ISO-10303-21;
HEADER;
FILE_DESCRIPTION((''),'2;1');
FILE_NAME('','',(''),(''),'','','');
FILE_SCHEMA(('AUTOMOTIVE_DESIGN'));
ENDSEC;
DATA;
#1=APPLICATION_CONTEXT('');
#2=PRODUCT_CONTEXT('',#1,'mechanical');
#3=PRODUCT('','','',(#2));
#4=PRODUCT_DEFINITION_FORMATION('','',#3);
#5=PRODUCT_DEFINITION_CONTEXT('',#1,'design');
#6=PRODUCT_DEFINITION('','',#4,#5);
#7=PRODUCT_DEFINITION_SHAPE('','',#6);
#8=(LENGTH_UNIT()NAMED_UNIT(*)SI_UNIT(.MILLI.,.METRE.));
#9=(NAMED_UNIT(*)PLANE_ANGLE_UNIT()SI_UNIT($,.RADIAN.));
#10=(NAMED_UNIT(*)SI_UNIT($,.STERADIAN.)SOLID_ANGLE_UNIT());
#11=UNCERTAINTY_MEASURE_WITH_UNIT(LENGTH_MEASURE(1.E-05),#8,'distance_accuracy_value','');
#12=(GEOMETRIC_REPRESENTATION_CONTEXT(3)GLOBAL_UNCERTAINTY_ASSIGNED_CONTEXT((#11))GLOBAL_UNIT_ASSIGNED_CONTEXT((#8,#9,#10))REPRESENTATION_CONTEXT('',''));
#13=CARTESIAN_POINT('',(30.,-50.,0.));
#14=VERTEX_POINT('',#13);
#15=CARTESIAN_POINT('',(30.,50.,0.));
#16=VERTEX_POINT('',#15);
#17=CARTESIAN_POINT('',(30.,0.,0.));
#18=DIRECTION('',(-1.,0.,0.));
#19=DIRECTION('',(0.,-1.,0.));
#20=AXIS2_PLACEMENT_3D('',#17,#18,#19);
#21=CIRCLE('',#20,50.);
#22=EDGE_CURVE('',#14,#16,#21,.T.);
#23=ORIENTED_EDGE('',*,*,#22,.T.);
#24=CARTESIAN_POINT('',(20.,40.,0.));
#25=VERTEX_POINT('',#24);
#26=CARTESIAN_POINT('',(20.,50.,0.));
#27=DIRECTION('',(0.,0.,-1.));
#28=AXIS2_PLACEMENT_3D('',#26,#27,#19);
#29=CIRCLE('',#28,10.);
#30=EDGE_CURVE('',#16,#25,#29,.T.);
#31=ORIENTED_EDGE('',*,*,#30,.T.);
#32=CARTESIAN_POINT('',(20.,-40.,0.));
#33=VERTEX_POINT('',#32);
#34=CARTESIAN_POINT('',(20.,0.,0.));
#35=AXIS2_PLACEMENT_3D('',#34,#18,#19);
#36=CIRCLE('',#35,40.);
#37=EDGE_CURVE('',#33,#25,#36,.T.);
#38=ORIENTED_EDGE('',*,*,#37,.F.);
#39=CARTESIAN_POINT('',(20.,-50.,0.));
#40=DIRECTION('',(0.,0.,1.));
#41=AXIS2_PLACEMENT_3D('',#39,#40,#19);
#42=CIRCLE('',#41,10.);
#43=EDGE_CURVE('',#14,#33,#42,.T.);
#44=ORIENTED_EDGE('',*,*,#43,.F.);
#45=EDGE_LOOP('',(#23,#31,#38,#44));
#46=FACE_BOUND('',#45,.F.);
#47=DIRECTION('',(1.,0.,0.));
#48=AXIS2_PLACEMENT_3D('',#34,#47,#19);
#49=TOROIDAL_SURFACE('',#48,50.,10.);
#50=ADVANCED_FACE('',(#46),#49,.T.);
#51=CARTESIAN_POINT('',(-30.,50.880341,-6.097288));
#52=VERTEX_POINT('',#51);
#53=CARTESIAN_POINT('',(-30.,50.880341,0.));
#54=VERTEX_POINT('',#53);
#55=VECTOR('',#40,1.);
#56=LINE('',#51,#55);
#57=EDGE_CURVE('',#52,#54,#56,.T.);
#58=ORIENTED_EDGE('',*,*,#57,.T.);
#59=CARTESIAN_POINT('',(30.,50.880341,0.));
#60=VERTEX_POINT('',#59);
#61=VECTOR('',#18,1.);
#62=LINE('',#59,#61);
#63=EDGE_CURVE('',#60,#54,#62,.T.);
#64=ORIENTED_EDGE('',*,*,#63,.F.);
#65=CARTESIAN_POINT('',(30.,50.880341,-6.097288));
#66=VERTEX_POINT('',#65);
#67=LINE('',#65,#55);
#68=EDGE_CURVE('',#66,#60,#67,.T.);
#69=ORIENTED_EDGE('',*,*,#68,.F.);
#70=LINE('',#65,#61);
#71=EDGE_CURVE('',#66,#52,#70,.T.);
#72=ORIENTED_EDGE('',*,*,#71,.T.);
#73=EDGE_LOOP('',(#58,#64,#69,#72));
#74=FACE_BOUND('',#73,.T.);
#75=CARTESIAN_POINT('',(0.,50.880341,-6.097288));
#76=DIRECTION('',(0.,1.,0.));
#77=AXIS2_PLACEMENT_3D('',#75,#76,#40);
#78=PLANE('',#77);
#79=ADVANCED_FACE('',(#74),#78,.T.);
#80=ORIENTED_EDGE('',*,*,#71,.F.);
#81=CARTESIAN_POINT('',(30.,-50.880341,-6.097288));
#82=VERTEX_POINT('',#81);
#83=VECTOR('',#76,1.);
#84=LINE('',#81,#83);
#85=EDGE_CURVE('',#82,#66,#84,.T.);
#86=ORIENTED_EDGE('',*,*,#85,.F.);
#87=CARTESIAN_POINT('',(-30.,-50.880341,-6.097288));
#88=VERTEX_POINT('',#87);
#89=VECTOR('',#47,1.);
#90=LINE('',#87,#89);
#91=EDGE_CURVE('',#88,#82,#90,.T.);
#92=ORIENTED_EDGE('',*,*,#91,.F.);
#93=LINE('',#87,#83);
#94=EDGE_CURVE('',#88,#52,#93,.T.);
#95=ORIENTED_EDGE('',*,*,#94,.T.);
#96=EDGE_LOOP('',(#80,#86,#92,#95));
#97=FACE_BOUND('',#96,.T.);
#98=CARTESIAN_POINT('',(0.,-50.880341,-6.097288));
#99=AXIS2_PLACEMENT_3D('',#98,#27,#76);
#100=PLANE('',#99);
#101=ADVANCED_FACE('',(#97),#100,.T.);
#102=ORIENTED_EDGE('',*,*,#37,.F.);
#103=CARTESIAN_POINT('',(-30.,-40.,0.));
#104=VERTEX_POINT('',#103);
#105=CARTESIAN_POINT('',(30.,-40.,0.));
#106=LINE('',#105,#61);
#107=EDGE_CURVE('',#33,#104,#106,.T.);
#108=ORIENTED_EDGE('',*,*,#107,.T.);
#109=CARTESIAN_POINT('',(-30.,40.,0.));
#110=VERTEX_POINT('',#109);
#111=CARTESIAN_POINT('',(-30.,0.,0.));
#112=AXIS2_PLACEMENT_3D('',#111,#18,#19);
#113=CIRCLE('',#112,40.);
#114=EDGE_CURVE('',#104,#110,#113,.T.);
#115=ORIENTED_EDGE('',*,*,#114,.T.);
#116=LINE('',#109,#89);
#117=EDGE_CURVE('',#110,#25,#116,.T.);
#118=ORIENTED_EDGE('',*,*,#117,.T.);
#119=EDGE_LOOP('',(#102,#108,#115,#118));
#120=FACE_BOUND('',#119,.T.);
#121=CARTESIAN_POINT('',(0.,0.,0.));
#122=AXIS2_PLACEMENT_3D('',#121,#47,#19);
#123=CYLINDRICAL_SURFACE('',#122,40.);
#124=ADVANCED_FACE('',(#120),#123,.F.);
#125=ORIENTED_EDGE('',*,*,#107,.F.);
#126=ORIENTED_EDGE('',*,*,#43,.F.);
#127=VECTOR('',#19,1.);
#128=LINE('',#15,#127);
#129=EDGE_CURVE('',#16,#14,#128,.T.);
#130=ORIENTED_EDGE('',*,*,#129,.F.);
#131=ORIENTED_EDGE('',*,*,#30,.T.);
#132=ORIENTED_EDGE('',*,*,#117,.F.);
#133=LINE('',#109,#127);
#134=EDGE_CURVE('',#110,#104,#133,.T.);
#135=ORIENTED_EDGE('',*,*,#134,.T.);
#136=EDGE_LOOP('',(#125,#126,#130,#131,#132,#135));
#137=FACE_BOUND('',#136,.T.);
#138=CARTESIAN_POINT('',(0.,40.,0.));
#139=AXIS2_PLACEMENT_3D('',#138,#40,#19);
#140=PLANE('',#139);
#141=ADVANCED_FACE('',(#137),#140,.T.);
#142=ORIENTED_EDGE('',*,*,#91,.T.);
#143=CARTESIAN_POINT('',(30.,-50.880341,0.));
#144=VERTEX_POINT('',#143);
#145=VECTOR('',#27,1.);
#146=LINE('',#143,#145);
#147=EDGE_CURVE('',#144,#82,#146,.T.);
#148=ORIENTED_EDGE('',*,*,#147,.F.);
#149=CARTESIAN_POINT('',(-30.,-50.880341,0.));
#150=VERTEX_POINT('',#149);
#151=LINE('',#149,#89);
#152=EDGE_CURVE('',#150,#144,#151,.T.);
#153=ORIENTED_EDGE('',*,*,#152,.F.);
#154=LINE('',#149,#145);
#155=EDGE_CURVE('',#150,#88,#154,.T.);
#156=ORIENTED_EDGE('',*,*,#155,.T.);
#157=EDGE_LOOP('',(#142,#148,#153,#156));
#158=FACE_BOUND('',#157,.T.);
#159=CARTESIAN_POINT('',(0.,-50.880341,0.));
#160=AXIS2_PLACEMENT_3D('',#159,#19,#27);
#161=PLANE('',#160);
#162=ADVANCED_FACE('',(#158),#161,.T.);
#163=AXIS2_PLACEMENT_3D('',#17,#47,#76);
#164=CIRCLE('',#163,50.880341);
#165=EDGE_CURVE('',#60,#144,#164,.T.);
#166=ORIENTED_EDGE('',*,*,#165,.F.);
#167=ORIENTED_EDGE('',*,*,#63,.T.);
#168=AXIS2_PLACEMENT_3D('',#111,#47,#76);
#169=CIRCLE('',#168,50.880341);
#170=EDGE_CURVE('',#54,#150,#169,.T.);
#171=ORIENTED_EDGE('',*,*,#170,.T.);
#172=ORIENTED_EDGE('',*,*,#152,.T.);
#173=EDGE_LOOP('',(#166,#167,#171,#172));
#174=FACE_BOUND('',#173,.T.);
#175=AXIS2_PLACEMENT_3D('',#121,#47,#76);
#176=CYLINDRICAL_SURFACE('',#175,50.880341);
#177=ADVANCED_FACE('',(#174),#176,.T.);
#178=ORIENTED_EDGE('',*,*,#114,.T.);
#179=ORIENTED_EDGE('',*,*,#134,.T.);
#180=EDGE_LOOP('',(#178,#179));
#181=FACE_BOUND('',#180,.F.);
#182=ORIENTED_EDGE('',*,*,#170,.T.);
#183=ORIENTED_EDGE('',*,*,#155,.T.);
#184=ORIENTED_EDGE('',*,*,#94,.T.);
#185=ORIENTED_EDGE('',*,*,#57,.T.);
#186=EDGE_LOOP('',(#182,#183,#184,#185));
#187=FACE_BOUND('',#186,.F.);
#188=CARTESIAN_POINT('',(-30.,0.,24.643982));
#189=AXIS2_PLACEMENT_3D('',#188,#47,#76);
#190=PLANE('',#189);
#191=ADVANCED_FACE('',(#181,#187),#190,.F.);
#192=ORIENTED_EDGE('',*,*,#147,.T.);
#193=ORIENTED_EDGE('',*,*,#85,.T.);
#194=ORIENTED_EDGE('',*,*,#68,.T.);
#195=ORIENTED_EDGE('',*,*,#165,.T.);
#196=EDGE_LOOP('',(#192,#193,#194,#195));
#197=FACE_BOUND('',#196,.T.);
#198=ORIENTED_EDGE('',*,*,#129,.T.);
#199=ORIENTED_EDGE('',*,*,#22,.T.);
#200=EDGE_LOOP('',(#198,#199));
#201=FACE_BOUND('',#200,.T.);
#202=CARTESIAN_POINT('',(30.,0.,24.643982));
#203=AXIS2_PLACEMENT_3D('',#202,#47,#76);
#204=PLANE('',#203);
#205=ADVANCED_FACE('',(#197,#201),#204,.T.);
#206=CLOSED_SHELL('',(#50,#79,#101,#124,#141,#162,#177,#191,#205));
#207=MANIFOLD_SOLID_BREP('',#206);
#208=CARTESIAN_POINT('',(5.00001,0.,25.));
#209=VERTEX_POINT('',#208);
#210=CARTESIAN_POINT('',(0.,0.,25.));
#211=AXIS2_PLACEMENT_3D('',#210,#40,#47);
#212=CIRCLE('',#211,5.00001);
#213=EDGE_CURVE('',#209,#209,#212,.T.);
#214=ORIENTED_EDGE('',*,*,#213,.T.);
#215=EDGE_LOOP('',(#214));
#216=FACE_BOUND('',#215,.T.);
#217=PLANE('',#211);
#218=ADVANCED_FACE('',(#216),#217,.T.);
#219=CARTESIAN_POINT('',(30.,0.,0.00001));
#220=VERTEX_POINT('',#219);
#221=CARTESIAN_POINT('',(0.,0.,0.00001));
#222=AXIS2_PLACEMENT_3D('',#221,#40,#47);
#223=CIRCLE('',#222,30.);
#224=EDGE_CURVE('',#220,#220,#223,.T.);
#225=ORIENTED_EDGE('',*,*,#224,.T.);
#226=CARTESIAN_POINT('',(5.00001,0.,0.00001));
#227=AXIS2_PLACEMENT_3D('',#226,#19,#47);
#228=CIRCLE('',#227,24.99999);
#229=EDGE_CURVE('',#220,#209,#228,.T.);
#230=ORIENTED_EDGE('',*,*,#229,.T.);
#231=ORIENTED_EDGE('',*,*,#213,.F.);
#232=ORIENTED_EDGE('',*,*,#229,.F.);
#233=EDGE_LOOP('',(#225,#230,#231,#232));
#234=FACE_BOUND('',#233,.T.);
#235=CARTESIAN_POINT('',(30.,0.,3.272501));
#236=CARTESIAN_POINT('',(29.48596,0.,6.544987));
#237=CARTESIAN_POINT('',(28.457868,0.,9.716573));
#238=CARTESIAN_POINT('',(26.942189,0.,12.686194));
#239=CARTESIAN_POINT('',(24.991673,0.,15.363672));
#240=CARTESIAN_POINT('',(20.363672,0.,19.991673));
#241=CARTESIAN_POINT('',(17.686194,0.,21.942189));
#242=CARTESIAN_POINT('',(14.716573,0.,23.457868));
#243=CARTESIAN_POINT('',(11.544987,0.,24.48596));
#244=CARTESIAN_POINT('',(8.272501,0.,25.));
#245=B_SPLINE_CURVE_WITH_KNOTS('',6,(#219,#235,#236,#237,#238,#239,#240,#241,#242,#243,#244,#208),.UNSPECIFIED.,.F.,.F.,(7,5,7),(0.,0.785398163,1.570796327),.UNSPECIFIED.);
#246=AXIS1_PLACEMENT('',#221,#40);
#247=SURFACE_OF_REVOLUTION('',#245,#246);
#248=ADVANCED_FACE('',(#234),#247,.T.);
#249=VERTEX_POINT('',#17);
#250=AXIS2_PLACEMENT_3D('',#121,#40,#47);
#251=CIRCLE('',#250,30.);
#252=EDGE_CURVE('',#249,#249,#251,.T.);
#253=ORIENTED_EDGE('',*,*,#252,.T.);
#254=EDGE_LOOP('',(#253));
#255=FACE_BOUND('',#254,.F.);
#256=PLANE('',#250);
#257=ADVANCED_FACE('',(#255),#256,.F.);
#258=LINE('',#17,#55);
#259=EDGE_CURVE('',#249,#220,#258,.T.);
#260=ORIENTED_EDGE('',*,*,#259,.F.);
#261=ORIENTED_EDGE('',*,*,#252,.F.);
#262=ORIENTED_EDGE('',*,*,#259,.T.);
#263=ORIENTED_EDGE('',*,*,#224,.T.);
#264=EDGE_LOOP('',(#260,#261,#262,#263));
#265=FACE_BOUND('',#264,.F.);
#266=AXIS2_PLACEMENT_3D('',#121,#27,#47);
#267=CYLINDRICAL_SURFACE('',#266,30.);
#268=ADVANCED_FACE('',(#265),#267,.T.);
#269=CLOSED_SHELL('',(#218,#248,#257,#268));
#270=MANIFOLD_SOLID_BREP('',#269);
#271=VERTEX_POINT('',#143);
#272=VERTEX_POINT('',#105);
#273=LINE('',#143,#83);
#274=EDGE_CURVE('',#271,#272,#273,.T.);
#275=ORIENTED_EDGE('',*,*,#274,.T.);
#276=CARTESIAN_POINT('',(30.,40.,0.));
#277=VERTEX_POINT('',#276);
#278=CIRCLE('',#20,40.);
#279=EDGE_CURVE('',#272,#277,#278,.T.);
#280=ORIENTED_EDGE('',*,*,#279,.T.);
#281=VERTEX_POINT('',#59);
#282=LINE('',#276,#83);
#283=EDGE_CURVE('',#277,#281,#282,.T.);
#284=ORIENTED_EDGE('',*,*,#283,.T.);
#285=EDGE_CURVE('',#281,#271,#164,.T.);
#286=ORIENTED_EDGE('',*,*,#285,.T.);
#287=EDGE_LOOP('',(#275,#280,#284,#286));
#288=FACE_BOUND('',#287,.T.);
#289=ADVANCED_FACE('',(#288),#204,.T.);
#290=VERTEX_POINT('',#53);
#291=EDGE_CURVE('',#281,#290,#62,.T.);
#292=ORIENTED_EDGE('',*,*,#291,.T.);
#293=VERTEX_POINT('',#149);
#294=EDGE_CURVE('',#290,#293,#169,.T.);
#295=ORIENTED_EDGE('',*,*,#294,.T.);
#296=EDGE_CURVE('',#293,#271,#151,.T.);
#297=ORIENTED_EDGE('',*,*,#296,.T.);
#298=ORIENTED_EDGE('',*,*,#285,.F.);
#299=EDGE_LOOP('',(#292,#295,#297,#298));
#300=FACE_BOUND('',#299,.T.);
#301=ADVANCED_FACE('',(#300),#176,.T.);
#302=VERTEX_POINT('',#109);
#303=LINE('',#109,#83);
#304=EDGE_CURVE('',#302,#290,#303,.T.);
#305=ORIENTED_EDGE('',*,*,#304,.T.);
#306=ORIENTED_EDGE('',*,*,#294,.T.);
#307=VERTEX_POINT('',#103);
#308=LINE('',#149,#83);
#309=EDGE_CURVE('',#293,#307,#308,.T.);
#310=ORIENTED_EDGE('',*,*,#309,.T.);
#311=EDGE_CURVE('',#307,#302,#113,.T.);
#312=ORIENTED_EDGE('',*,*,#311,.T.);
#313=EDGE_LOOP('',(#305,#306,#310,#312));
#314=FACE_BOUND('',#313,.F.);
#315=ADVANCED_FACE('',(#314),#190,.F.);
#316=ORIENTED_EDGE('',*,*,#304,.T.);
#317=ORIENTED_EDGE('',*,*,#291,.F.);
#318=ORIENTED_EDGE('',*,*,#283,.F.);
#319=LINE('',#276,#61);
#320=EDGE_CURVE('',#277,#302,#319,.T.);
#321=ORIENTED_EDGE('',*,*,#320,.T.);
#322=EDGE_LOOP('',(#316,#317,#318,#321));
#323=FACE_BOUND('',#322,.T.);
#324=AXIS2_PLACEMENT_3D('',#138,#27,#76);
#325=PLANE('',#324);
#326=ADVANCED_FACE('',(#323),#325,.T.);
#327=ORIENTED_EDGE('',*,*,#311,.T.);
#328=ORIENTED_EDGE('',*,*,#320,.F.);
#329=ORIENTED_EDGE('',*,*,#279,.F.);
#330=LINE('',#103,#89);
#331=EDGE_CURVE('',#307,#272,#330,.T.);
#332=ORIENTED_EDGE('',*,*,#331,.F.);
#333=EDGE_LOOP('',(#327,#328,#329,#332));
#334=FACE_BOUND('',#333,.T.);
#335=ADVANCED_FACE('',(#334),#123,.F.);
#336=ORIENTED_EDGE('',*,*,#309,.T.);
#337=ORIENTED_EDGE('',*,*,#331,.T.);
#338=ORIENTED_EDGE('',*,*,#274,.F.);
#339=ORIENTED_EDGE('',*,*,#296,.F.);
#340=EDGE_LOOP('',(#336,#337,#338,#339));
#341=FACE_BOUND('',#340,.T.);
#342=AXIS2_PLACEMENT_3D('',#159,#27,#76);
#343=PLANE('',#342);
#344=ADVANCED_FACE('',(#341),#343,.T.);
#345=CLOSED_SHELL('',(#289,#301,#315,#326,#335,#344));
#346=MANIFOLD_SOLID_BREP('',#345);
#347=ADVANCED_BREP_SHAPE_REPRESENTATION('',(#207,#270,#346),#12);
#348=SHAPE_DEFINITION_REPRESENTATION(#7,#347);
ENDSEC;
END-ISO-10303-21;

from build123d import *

# Parameters (mm, degrees)
F0_R          = 30
F1_DEPTH      = 25
F2_R          = 24.99999
F4_DEPTH      = 30
F4_DEPTH_BACK = 30
F5_DEPTH      = 30
F5_DEPTH_BACK = 30
F6_R          = 10


# Not quite as in the source:
# - a fillet or chamfer is up to 0.001 mm smaller than in the source, because OpenCascade refuses the exact size


with BuildPart() as f1:
    # F0 (on Top) → F1 (new body)
    with BuildSketch(Plane.XY):
        Circle(F0_R)
    extrude(amount=F1_DEPTH)

    # F2 (radius 25 in the source; OpenCascade refuses exactly that, so slightly less here)
    f2_edges = [f1.edges().sort_by_distance(p)[0] for p in [
        (-30, 0, 25),
    ]]
    fillet(f2_edges, radius=F2_R)


with BuildPart() as f4:
    # F3 (on Right) → F4 (new body, two sides)
    with BuildSketch(Plane.YZ) as f4_sk:
        with BuildLine():
            ThreePointArc((50.8803409753, 0), (0, 50.8803409753), (-50.8803409753, 0))
            Line((-50.8803409753, 0), (-40, 0))
            ThreePointArc((-40, 0), (0, 40), (40, 0))
            Line((40, 0), (50.8803409753, 0))
        make_face()
    extrude(amount=F4_DEPTH)
    extrude(f4_sk.sketch, amount=-F4_DEPTH_BACK)


with BuildPart() as f5:
    # F3 (on Right) → F5 (new body, two sides)
    with BuildSketch(Plane.YZ) as f5_sk:
        with BuildLine():
            ThreePointArc((50.8803409753, 0), (0, 50.8803409753), (-50.8803409753, 0))
            Line((-50.8803409753, 0), (-40, 0))
            ThreePointArc((-40, 0), (0, 40), (40, 0))
            Line((40, 0), (50.8803409753, 0))
        make_face()
        Polygon((-40, 0), (-50.8803409753, 0), (-50.8803409753, -6.0972881854), (50.8803409753, -6.0972881854), (50.8803409753, 0), (40, 0), align=None)
    extrude(amount=F5_DEPTH)
    extrude(f5_sk.sketch, amount=-F5_DEPTH_BACK)

    # F6
    f6_edges = [f5.edges().sort_by_distance(p)[0] for p in [
        (30, 0, 40),
    ]]
    fillet(f6_edges, radius=F6_R)


solid = Compound([f1.part, f4.part, f5.part])
